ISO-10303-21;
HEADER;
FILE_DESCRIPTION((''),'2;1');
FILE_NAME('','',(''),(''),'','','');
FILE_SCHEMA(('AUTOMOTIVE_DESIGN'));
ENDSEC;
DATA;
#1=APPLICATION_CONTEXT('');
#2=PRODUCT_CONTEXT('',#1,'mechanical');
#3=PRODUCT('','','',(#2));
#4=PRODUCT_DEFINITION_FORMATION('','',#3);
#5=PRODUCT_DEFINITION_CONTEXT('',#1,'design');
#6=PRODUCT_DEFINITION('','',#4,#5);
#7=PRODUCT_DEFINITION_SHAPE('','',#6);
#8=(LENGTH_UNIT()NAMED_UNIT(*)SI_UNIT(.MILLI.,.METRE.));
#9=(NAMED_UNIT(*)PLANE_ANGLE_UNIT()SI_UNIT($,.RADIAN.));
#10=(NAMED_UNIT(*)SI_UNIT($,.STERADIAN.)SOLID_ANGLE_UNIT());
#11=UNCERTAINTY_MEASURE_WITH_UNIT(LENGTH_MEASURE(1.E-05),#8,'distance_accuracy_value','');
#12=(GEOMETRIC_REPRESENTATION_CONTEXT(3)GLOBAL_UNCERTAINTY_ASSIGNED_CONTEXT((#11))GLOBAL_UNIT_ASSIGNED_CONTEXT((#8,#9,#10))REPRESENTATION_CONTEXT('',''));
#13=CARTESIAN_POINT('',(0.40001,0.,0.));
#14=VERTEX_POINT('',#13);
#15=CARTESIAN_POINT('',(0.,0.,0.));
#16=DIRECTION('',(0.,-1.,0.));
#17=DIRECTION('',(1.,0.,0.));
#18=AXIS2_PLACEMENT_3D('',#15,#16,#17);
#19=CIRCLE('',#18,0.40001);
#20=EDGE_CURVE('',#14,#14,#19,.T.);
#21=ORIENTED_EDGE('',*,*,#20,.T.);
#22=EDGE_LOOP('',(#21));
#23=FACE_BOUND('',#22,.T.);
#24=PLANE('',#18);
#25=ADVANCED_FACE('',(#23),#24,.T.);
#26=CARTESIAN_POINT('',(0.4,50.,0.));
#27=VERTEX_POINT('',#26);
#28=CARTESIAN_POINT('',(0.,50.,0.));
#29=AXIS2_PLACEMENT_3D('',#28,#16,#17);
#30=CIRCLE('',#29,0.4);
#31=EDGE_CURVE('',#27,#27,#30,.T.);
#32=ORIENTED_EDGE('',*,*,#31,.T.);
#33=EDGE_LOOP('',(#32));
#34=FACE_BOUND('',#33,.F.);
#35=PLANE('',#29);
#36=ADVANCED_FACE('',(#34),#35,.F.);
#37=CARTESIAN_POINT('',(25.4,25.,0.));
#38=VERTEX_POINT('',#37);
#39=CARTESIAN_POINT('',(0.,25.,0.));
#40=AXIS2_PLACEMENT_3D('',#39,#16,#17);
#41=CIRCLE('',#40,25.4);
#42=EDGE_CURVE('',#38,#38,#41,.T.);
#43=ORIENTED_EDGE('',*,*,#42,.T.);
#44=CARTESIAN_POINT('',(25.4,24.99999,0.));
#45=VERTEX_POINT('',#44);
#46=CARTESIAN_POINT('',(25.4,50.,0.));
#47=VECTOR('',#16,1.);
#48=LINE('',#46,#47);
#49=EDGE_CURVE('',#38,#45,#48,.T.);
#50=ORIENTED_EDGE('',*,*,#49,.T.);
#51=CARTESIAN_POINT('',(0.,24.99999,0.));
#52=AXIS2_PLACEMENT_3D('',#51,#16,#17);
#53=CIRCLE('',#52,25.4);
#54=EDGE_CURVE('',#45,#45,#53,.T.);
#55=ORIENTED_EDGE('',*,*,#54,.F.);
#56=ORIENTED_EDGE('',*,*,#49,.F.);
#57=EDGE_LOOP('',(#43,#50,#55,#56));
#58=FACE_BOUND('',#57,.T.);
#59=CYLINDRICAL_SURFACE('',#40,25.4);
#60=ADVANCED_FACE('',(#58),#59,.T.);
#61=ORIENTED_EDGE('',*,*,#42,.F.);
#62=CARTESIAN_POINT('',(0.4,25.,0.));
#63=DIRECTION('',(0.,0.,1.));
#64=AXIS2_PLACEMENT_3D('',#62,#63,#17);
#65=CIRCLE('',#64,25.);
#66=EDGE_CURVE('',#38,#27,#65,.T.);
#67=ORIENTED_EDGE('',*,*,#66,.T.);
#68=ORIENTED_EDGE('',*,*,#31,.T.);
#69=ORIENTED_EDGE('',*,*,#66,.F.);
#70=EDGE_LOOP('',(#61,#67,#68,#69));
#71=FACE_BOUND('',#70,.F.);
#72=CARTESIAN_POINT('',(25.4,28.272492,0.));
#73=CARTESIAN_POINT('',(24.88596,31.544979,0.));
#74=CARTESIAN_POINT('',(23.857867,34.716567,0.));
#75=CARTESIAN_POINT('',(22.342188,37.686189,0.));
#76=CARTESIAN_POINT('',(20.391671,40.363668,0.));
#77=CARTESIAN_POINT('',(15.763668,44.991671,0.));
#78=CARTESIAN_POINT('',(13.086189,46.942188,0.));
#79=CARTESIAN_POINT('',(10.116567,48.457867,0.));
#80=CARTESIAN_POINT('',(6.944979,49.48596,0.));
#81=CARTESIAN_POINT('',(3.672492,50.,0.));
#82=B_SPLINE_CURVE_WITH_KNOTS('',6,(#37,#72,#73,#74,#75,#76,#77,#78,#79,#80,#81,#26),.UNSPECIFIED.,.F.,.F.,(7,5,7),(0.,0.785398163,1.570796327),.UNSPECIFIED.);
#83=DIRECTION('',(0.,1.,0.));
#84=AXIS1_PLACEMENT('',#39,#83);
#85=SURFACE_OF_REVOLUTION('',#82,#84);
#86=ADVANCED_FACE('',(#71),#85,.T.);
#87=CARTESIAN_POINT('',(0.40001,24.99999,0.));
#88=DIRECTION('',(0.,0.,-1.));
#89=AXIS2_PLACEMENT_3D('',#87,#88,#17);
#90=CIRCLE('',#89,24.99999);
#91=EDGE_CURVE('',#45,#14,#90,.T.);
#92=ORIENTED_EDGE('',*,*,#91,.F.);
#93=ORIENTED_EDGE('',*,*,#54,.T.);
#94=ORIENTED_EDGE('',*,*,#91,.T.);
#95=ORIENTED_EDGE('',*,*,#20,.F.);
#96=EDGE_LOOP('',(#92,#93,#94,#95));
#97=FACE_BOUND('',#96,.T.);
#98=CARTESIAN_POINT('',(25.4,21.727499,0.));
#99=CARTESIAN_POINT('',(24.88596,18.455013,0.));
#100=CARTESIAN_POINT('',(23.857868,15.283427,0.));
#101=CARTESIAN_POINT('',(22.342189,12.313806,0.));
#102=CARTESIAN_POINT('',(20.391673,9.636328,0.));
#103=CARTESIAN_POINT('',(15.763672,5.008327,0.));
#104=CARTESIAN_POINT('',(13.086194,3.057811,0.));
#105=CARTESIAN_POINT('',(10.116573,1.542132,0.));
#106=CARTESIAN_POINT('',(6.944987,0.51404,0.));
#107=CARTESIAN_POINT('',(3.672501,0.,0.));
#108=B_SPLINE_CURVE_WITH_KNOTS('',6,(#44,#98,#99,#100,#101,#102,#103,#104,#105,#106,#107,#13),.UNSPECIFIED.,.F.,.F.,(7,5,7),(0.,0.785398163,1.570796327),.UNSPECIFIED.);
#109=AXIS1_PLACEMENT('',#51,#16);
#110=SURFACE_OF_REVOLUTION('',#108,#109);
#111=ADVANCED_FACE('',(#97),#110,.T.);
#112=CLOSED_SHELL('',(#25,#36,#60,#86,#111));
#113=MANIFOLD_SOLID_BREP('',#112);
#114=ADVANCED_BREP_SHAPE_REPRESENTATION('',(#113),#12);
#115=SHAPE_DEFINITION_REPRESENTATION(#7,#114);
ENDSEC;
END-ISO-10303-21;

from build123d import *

# Parameters (mm, degrees)
F0_R     = 25.4
F1_DEPTH = 25
F2_R     = 24.99999
F3_DEPTH = 25
F4_R     = 25


# Not quite as in the source:
# - a fillet or chamfer is up to 0.001 mm smaller than in the source, because OpenCascade refuses the exact size


with BuildPart() as f1:
    # F0 (on Front) → F1 (new body)
    with BuildSketch(Plane.XZ):
        Circle(F0_R)
    extrude(amount=-F1_DEPTH)

    # F2 (radius 25 in the source; OpenCascade refuses exactly that, so slightly less here)
    f2_edges = [f1.edges().sort_by_distance(p)[0] for p in [
        (-25.4, 0, 0),
    ]]
    fillet(f2_edges, radius=F2_R)

    # F3 (add): a face of the model
    f3_faces = [f1.faces().sort_by_distance(p)[0] for p in [
        (0, 25, 0),
    ]]
    extrude(f3_faces, amount=F3_DEPTH)

    # F4
    f4_edges = [f1.edges().sort_by_distance(p)[0] for p in [
        (-25.4, 50, 0),
    ]]
    fillet(f4_edges, radius=F4_R)


solid = f1.part
